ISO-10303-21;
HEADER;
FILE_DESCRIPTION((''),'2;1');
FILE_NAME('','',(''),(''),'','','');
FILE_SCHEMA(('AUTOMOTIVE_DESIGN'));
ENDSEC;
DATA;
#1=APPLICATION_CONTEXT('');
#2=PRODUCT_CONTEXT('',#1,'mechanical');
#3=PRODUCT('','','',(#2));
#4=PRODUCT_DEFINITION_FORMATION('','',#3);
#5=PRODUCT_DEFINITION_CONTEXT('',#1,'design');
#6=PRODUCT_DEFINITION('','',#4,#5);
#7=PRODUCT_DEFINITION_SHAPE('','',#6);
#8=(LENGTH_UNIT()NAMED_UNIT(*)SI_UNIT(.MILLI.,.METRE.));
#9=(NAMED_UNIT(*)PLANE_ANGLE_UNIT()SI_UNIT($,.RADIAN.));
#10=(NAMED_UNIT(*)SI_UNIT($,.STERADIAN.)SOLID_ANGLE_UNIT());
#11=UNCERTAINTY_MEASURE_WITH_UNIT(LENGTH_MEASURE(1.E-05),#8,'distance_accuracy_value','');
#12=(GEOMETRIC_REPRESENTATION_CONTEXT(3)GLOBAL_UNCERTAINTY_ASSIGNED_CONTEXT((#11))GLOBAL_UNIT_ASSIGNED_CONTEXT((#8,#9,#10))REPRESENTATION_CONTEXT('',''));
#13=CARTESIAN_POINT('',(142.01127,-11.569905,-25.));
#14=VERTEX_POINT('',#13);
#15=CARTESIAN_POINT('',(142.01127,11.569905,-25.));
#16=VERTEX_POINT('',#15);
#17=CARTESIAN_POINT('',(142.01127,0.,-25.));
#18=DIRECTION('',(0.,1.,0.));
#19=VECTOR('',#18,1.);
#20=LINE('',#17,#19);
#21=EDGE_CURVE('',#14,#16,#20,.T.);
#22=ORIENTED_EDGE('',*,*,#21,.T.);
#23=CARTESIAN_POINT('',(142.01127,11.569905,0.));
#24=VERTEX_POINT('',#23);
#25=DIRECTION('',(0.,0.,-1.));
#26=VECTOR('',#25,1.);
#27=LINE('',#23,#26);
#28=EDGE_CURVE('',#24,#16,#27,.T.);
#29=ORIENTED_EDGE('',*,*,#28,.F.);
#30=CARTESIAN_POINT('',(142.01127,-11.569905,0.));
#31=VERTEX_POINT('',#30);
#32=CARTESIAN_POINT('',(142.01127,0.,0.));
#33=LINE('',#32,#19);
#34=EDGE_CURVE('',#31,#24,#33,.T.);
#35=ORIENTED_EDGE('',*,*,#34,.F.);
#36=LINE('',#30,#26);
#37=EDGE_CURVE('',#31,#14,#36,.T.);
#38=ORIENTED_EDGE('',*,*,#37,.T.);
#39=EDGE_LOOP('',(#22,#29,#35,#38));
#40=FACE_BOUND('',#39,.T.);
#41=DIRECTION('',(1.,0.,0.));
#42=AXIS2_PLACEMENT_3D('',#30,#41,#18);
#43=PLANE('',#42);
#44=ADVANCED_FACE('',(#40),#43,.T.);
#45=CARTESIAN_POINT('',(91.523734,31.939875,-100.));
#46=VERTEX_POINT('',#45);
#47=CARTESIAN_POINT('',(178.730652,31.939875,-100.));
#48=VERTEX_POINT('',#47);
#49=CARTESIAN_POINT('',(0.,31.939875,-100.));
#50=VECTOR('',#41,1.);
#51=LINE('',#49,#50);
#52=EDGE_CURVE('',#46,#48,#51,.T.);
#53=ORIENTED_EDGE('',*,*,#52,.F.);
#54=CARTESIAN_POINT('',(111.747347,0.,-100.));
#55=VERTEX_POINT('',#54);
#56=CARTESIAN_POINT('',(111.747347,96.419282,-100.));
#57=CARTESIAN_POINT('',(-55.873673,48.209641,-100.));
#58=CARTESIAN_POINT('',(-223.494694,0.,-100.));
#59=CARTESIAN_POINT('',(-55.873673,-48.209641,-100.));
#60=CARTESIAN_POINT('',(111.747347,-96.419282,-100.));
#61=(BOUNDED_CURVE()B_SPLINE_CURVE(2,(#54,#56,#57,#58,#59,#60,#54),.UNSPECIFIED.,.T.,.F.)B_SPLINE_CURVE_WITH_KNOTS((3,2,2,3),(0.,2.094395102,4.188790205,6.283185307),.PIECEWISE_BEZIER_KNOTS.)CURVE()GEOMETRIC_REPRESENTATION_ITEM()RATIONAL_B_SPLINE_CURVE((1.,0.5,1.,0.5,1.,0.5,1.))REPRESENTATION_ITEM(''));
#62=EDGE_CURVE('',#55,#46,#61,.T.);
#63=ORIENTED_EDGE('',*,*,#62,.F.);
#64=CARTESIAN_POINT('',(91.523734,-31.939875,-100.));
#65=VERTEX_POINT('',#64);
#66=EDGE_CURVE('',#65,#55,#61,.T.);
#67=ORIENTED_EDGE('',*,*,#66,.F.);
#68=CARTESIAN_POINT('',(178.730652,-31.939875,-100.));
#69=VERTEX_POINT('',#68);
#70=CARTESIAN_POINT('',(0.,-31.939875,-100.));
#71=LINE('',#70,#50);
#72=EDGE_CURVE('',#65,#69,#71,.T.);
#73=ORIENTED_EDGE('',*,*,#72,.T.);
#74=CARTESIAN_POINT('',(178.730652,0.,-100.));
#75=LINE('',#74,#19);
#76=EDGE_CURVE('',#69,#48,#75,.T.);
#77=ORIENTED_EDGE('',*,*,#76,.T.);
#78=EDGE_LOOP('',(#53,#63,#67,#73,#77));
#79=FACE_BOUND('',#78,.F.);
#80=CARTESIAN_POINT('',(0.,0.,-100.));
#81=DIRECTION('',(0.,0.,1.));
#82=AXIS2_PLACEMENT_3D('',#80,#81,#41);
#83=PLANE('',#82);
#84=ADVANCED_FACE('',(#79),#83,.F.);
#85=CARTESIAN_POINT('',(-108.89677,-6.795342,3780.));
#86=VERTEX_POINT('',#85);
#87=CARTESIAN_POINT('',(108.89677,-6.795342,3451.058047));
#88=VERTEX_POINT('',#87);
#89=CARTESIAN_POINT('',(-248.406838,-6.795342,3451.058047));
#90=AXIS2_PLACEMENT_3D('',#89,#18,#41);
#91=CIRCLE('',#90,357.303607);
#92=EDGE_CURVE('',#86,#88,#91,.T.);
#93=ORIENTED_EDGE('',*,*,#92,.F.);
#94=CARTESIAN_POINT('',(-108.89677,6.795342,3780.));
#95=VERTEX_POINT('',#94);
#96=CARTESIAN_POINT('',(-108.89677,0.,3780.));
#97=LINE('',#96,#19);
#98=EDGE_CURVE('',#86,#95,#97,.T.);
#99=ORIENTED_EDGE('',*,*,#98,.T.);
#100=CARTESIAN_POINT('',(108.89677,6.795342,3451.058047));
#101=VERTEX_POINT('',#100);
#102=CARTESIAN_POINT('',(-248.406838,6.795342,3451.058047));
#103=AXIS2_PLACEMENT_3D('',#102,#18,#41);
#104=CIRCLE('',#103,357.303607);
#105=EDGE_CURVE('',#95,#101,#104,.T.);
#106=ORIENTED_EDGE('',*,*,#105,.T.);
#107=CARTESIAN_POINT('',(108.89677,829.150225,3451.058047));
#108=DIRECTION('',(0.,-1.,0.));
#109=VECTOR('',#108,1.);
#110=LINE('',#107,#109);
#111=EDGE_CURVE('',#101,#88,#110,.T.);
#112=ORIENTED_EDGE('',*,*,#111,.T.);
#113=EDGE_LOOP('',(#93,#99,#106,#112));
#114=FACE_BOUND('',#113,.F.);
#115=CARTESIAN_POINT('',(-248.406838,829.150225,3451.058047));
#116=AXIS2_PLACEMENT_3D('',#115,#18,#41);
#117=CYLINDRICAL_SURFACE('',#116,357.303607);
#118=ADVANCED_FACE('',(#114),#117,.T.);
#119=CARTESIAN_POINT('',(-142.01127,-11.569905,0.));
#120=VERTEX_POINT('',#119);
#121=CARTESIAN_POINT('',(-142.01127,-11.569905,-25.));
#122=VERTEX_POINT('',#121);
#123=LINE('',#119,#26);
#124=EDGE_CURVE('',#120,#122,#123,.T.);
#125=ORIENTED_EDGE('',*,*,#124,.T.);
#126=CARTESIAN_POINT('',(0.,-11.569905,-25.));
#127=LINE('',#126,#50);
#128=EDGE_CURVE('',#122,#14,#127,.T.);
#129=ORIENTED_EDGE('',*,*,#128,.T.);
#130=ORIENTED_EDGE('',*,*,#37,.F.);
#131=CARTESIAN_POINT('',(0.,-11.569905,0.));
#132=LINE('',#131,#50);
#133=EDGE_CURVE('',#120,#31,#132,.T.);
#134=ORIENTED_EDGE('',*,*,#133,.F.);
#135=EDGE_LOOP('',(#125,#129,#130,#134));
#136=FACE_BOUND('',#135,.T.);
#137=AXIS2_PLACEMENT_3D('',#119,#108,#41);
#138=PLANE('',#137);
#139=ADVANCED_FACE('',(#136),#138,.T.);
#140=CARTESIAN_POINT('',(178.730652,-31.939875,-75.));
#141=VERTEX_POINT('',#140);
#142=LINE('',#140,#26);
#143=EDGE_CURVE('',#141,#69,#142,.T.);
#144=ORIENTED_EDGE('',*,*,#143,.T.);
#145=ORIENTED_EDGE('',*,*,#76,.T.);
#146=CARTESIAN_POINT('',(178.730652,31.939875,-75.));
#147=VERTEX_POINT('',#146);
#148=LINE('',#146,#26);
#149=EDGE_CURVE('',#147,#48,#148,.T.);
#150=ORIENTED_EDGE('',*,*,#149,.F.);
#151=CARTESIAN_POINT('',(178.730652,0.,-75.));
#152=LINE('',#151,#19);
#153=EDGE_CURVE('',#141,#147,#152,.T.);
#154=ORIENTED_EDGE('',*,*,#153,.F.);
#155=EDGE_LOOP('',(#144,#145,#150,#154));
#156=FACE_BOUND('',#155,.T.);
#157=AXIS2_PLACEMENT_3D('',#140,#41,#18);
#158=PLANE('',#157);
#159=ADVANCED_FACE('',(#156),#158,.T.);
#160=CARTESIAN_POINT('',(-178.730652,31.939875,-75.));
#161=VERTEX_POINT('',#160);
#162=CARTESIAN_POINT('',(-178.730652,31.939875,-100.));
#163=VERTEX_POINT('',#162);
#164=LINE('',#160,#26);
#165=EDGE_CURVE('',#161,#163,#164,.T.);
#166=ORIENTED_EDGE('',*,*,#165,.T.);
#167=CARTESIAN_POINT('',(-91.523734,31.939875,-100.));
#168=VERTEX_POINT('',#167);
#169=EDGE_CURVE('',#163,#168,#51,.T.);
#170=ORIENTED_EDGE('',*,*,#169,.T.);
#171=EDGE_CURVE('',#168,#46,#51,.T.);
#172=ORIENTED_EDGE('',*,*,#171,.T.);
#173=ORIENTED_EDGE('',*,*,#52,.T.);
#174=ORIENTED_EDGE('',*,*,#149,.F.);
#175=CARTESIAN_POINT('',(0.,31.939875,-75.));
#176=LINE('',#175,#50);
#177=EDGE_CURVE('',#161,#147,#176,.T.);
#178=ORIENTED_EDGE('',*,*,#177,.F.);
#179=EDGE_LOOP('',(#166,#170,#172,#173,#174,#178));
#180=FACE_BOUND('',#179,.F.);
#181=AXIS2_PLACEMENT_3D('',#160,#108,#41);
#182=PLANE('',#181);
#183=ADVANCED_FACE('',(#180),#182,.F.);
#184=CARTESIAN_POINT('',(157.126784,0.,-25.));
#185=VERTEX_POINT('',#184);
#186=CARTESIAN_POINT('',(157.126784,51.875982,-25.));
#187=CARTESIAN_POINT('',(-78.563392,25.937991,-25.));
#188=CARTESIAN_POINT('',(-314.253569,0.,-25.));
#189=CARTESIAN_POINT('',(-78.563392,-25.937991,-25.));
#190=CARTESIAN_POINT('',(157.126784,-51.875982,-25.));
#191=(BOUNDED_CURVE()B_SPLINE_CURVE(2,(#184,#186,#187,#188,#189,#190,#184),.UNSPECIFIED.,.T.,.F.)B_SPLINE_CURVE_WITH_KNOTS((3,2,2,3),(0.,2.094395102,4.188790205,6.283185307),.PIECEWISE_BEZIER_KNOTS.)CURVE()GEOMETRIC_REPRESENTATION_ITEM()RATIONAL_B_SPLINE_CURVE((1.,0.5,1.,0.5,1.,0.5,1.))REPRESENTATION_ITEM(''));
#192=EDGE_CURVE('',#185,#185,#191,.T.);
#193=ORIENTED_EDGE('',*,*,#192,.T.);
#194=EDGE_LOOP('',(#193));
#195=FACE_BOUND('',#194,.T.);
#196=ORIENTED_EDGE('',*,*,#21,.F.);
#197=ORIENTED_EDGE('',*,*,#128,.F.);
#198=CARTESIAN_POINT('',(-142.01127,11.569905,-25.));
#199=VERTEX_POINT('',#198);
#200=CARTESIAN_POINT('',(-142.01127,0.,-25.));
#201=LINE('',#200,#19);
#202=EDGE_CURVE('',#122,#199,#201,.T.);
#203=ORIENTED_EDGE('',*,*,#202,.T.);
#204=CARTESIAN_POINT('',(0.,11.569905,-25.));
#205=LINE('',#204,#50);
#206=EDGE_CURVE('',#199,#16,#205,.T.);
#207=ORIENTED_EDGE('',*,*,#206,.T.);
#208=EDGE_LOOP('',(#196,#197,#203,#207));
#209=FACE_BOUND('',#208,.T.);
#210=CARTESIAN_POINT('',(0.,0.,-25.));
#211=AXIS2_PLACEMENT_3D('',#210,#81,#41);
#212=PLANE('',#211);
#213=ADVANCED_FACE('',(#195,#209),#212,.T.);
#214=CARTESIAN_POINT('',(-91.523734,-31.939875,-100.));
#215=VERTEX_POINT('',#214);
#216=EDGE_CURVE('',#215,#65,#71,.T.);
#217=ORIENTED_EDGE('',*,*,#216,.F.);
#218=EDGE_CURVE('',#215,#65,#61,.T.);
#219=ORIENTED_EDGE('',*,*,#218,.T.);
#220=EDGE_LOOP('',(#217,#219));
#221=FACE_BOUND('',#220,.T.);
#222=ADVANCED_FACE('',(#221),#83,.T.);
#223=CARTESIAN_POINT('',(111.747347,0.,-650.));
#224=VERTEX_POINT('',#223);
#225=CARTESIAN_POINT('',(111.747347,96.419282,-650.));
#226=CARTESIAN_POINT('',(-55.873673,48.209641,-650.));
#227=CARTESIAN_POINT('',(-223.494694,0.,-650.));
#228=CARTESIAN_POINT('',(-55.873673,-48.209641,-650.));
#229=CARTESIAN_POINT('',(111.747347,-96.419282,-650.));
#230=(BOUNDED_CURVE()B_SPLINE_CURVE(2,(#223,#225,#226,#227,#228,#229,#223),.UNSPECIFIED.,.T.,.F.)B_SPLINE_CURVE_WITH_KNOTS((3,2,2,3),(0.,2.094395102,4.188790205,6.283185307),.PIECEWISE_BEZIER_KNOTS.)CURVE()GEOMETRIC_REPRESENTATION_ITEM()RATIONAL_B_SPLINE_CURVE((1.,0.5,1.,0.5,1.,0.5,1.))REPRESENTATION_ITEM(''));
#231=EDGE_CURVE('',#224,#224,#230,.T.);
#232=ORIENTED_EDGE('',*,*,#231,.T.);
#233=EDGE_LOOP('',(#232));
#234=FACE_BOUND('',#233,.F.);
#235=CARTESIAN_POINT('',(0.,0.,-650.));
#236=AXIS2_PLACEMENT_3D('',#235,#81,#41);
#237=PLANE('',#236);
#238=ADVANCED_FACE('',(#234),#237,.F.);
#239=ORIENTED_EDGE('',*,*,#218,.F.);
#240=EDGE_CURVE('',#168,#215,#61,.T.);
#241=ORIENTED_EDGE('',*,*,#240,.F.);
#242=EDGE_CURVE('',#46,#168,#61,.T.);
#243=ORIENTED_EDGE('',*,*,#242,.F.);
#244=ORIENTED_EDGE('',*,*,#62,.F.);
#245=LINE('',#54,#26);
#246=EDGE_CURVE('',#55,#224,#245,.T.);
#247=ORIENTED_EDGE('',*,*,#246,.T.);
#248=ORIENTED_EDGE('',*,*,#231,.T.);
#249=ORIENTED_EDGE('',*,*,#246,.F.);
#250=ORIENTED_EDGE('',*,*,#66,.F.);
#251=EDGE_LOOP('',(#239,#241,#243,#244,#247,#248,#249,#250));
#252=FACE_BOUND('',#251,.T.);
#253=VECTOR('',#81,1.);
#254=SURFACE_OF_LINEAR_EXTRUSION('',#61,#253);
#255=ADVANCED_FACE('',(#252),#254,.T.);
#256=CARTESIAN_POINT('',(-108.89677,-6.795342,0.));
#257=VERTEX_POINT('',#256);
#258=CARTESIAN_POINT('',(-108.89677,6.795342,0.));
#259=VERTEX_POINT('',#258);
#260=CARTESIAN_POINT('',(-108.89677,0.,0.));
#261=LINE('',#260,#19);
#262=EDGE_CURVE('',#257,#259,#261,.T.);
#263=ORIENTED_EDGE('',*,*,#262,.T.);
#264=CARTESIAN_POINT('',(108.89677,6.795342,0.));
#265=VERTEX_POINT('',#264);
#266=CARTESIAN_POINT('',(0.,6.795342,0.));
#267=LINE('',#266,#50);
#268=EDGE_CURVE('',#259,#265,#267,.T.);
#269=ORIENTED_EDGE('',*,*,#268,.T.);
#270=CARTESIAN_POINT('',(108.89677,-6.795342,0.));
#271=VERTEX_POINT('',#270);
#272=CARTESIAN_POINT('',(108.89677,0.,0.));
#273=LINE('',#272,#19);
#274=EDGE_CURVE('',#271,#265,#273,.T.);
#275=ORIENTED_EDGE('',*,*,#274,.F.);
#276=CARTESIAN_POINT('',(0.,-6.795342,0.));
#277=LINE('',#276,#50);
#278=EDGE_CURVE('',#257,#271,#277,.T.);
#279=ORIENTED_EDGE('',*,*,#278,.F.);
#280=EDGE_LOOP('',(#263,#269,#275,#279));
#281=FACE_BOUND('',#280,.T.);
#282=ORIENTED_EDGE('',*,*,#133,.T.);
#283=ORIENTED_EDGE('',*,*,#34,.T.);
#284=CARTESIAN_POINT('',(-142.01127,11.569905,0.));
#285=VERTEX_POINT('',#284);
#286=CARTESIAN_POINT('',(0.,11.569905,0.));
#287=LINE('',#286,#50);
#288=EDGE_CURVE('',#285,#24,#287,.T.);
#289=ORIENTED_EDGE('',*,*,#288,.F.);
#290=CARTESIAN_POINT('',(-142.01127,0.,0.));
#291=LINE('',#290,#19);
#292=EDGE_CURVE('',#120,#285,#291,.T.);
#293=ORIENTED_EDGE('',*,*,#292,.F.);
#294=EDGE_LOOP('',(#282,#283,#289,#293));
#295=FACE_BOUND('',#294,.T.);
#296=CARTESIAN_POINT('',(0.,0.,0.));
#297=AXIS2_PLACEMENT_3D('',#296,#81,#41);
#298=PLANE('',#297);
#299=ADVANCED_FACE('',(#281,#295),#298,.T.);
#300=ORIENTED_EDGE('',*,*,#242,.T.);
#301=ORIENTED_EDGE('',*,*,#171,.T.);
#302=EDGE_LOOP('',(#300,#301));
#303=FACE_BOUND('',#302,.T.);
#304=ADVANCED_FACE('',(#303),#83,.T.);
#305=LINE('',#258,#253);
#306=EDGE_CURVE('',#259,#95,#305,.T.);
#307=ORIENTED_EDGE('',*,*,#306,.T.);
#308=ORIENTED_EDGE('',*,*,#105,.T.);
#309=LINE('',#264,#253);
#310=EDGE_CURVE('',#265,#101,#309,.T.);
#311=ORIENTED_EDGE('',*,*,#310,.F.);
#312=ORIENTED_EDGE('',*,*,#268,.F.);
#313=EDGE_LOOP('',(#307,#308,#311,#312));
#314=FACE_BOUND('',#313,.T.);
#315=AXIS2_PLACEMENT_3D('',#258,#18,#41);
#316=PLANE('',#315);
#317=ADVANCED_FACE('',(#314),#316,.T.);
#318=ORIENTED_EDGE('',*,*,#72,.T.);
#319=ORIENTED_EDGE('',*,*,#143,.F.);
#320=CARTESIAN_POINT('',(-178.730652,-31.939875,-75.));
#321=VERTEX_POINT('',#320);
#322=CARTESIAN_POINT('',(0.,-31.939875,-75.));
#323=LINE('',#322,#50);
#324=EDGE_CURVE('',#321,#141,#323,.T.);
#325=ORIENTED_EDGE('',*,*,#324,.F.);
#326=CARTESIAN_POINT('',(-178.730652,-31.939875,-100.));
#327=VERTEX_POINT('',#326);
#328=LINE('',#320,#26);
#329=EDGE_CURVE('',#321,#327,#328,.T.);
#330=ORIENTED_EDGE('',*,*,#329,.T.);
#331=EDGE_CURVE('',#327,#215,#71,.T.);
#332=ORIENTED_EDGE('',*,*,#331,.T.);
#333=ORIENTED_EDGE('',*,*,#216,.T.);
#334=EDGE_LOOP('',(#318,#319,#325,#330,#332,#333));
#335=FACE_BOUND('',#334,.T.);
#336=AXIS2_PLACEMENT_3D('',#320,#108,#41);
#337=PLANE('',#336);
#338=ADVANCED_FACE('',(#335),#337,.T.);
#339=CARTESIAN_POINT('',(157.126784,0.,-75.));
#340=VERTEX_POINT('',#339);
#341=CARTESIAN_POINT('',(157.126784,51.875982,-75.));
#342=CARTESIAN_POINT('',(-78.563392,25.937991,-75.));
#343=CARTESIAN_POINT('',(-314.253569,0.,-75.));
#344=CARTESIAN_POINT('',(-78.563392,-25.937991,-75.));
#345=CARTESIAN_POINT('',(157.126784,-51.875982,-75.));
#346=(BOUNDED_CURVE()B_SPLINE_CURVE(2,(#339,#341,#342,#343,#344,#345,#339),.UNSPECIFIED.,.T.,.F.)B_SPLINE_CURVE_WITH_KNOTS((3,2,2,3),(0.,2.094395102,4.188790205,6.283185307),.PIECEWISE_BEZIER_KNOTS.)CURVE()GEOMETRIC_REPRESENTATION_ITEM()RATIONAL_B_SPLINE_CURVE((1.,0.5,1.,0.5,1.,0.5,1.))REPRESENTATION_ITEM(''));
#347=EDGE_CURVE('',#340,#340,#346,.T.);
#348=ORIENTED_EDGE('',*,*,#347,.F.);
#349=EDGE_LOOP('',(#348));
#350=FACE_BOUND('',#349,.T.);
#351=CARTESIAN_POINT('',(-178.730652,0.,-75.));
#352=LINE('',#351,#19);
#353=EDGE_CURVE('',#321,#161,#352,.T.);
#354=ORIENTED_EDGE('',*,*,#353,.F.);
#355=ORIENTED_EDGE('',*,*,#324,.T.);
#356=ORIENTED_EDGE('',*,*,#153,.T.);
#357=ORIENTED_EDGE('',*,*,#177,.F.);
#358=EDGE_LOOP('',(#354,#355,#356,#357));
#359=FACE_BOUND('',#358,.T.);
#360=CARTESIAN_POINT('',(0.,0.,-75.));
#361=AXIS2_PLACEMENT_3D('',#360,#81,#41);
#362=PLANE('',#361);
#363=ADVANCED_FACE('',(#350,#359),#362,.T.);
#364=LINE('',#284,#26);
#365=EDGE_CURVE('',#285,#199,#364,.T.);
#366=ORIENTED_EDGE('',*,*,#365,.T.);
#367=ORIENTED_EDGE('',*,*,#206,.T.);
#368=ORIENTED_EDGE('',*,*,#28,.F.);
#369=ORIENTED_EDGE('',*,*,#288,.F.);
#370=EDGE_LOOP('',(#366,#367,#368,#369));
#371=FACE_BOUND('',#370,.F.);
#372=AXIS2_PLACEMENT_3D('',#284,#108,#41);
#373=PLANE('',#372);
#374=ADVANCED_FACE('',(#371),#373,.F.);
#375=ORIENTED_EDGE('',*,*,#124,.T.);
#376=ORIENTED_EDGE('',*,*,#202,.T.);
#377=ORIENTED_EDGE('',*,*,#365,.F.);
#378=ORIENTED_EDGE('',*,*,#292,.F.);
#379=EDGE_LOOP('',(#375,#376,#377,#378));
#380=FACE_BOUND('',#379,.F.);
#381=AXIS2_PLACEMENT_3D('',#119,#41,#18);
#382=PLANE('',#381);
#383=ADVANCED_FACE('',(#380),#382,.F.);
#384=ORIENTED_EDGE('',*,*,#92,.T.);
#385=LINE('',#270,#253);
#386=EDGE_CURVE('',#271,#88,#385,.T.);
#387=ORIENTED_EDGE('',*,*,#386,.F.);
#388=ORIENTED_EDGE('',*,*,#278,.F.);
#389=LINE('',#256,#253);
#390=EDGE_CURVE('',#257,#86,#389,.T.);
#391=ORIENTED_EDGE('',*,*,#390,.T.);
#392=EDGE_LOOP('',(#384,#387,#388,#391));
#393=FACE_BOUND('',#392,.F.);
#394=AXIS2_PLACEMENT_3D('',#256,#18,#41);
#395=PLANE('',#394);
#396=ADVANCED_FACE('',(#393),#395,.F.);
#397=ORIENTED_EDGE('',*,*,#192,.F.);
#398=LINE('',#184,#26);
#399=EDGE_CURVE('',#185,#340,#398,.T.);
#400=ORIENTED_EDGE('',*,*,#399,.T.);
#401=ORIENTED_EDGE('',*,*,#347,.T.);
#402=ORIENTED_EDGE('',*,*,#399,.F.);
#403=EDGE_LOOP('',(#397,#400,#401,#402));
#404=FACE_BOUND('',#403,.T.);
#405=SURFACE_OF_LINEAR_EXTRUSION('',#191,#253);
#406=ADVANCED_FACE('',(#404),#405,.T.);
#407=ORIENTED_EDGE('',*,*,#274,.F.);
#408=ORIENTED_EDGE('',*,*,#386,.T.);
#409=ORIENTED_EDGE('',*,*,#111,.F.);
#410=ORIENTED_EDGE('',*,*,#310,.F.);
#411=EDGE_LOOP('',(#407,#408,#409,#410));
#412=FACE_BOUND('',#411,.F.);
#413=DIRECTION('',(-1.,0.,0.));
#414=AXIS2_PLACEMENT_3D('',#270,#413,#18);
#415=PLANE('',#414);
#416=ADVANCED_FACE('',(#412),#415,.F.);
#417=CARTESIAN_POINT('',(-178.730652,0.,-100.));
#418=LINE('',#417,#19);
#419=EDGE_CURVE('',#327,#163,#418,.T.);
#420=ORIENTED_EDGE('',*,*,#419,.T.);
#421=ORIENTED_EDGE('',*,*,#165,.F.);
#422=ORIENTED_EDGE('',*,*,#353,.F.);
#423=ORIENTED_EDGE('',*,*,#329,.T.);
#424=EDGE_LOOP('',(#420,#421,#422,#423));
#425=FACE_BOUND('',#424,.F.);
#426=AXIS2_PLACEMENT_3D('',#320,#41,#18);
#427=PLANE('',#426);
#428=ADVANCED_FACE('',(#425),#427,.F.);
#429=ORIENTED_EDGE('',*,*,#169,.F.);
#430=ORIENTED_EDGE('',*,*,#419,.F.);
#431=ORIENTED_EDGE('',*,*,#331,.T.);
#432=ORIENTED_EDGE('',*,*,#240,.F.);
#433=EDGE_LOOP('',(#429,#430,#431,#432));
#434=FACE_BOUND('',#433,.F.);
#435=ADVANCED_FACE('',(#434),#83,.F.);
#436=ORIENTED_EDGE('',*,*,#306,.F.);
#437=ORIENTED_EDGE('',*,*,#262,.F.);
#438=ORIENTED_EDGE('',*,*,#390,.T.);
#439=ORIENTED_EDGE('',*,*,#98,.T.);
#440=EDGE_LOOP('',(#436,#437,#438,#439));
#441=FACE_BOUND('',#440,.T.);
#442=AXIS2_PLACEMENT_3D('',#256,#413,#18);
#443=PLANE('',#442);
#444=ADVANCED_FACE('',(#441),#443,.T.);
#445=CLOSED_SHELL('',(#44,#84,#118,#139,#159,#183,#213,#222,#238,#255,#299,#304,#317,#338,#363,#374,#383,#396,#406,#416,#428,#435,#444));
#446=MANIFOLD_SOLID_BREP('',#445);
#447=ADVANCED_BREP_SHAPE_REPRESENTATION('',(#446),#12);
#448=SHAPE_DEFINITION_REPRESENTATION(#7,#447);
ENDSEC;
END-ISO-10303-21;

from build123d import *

# Parameters (mm, degrees)
F0_W        = 217.7935391665
F0_H        = 13.5906832293
F1_DEPTH    = 3780
F2_T1_DEPTH = 1658.3004497915
F3_W        = 284.022539854
F3_H        = 23.1398101896
F4_DEPTH    = 25
F7_DEPTH    = 50
F9_W        = 357.4613034725
F9_H        = 63.879750669
F10_DEPTH   = 25
F13_DEPTH   = 550


# Not quite as in the source:
# - a fillet or chamfer that OpenCascade refuses, or shapes differently, is made with other operations: its cross-section is extruded or revolved along the edge and cut away or added


with BuildPart() as f1:
    # F0 (on Top) → F1 (new body)
    with BuildSketch(Plane.XY):
        Rectangle(F0_W, F0_H)
    extrude(amount=F1_DEPTH)

    # F2: fillet of radius 357.3036072312 on 1 edges, made by hand

    # F2_s2 → F2_t1 (cut)
    with BuildSketch(Plane.XZ.offset(-829.1502248957)):
        with BuildLine():
            ThreePointArc((108.8967695832, 3451.0580466876), (49.513720811, 3648.3122192364), (-108.8967695832, 3780))
            Line((-108.8967695832, 3780), (108.8967695832, 3780))
            Line((108.8967695832, 3780), (108.8967695832, 3451.0580466876))
        make_face()
    extrude(amount=F2_T1_DEPTH, mode=Mode.SUBTRACT)

    # F3 (on Top) → F4 (join)
    with BuildSketch(Plane.XY):
        Rectangle(F3_W, F3_H)
    extrude(amount=-F4_DEPTH)

    # F6 (on offset) → F7 (join)
    with BuildSketch(Plane.XY.offset(-25)):
        with BuildLine():
            add(Edge.make_bspline(
                [(157.1267843246, 0), (157.1267843246, 51.8759819398), (-78.5633921623, 25.9379909699), (-314.2535686493, 0), (-78.5633921623, -25.9379909699), (157.1267843246, -51.8759819398), (157.1267843246, 0)],
                knots=[0, 0, 0, 2.0943951024, 2.0943951024, 4.1887902048, 4.1887902048, 6.2831853072, 6.2831853072, 6.2831853072], degree=2, weights=[1, 0.5, 1, 0.5, 1, 0.5, 1]))
        make_face()
    extrude(amount=-F7_DEPTH)

    # F9 (on offset) → F10 (join)
    with BuildSketch(Plane.XY.offset(-75)):
        Rectangle(F9_W, F9_H)
    extrude(amount=-F10_DEPTH)

    # F12 (on offset) → F13 (join)
    with BuildSketch(Plane.XY.offset(-100)):
        with BuildLine():
            add(Edge.make_bspline(
                [(111.7473468184, 0), (111.7473468184, 96.4192818942), (-55.8736734092, 48.2096409471), (-223.4946936369, 0), (-55.8736734092, -48.2096409471), (111.7473468184, -96.4192818942), (111.7473468184, 0)],
                knots=[0, 0, 0, 2.0943951024, 2.0943951024, 4.1887902048, 4.1887902048, 6.2831853072, 6.2831853072, 6.2831853072], degree=2, weights=[1, 0.5, 1, 0.5, 1, 0.5, 1]))
        make_face()
    extrude(amount=-F13_DEPTH)


solid = f1.part
